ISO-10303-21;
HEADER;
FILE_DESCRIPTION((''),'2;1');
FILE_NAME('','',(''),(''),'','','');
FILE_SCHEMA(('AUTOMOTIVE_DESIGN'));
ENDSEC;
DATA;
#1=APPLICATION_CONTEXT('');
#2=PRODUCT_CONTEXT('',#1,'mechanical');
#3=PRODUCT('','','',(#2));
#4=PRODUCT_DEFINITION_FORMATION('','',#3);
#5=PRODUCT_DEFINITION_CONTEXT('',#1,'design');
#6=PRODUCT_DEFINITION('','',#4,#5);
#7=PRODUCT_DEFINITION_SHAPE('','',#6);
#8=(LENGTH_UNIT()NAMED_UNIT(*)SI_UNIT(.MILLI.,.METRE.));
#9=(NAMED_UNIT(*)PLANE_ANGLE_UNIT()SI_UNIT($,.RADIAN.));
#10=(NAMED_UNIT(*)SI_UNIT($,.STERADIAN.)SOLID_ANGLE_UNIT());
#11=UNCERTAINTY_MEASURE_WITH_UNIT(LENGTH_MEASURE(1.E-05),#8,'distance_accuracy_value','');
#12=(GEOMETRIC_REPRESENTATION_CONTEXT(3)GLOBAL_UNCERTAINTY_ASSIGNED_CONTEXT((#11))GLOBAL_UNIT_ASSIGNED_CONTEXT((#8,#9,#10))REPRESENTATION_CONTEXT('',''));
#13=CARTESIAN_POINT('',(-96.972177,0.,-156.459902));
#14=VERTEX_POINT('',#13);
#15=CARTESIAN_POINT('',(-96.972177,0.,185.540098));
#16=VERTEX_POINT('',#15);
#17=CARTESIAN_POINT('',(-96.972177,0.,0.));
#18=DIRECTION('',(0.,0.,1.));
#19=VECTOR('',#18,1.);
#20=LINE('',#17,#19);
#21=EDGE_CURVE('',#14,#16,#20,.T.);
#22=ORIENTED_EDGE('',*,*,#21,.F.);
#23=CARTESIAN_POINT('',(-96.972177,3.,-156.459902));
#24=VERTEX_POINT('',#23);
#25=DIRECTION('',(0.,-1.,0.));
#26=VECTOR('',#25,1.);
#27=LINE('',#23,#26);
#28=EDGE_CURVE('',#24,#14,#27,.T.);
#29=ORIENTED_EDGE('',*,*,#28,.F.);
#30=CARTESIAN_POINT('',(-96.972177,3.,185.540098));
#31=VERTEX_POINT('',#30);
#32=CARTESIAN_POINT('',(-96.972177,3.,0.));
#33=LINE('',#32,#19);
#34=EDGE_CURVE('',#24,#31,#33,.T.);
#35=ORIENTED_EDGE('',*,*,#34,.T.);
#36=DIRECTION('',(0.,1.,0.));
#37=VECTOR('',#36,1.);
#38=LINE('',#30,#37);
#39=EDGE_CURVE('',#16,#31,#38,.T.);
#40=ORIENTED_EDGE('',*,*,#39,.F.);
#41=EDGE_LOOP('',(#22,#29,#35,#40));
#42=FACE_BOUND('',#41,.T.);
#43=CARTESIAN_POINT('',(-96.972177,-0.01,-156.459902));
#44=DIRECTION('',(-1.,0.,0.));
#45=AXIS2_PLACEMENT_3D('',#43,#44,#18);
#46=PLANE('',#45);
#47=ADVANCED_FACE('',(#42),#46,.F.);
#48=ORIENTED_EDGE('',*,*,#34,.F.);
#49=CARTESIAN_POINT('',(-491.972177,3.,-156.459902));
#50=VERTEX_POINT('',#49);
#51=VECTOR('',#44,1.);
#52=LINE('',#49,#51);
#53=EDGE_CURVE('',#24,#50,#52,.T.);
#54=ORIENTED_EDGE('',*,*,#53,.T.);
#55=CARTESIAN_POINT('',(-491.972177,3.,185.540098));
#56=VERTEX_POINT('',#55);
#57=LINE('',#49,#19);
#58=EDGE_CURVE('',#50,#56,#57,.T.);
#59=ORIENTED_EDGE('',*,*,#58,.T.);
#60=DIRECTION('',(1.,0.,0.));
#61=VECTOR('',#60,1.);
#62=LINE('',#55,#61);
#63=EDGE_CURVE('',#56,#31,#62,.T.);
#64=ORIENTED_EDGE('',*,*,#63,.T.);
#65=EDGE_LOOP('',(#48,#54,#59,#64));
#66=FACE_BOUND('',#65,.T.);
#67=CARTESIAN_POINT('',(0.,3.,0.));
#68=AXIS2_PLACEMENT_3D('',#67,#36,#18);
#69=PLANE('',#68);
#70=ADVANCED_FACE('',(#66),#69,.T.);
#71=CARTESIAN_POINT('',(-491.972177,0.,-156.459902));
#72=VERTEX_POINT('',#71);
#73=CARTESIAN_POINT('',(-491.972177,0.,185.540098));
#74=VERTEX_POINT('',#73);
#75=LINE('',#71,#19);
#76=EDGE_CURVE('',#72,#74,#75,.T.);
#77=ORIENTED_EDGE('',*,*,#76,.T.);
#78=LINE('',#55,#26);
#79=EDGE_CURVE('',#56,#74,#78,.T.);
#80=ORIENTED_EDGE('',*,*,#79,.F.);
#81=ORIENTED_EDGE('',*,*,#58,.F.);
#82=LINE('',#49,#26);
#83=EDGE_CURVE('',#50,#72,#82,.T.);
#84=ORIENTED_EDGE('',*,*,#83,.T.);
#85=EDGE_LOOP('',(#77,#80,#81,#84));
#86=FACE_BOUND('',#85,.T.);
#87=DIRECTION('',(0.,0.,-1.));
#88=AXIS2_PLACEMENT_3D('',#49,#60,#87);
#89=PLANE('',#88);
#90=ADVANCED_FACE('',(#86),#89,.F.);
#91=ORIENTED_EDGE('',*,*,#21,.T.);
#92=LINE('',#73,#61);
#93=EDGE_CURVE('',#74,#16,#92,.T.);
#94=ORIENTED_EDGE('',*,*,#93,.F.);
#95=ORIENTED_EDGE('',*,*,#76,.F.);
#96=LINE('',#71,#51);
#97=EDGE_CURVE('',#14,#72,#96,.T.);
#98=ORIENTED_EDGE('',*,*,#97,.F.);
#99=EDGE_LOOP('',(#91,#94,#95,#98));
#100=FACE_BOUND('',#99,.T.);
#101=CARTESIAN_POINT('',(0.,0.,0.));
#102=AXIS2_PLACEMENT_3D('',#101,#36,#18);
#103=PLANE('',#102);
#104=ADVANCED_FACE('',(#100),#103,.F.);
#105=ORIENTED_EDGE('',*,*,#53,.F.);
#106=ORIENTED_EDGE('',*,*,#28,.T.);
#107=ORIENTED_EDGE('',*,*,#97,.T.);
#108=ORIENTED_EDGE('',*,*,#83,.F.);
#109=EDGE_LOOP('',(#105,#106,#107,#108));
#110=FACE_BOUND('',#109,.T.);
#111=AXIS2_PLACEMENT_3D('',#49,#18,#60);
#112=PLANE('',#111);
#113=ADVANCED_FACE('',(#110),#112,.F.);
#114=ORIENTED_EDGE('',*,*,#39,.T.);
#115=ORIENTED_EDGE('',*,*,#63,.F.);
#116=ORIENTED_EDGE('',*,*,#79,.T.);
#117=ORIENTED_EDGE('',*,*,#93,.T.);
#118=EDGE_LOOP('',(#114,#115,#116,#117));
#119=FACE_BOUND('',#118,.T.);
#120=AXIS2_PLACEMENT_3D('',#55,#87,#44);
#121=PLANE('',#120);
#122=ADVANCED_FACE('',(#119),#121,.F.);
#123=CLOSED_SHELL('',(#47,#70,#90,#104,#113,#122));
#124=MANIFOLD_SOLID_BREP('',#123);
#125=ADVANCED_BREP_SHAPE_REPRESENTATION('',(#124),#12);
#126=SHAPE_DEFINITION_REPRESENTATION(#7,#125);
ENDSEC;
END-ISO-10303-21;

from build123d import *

# Parameters (mm, degrees)
SKETCH1_W           = 790
SKETCH1_H           = 342
BOSS_EXTRUDE1_DEPTH = 3
SPLIT1_START        = -96.972176759
SPLIT1_OUTLINE_W    = 3
SPLIT1_OUTLINE_H    = 342
SPLIT1_DEPTH        = 395


# Read off the part's stored shape, not the designer's step: Split1
with BuildPart() as part:
    # Sketch1 → Boss-Extrude1 (new body)
    with BuildSketch(Plane(origin=(0, 0, 0), x_dir=(1, 0, 0), z_dir=(0, 1, 0))):
        with Locations((-96.972176759, -14.5400982)):
            Rectangle(SKETCH1_W, SKETCH1_H)
    extrude(amount=BOSS_EXTRUDE1_DEPTH)

    # Split1 outline → Split1 (cut)
    with BuildSketch(Plane.YZ.offset(SPLIT1_START)):
        with Locations((1.5, 14.5400982)):
            Rectangle(SPLIT1_OUTLINE_W, SPLIT1_OUTLINE_H)
    extrude(amount=SPLIT1_DEPTH, mode=Mode.SUBTRACT)


solid = part.part
